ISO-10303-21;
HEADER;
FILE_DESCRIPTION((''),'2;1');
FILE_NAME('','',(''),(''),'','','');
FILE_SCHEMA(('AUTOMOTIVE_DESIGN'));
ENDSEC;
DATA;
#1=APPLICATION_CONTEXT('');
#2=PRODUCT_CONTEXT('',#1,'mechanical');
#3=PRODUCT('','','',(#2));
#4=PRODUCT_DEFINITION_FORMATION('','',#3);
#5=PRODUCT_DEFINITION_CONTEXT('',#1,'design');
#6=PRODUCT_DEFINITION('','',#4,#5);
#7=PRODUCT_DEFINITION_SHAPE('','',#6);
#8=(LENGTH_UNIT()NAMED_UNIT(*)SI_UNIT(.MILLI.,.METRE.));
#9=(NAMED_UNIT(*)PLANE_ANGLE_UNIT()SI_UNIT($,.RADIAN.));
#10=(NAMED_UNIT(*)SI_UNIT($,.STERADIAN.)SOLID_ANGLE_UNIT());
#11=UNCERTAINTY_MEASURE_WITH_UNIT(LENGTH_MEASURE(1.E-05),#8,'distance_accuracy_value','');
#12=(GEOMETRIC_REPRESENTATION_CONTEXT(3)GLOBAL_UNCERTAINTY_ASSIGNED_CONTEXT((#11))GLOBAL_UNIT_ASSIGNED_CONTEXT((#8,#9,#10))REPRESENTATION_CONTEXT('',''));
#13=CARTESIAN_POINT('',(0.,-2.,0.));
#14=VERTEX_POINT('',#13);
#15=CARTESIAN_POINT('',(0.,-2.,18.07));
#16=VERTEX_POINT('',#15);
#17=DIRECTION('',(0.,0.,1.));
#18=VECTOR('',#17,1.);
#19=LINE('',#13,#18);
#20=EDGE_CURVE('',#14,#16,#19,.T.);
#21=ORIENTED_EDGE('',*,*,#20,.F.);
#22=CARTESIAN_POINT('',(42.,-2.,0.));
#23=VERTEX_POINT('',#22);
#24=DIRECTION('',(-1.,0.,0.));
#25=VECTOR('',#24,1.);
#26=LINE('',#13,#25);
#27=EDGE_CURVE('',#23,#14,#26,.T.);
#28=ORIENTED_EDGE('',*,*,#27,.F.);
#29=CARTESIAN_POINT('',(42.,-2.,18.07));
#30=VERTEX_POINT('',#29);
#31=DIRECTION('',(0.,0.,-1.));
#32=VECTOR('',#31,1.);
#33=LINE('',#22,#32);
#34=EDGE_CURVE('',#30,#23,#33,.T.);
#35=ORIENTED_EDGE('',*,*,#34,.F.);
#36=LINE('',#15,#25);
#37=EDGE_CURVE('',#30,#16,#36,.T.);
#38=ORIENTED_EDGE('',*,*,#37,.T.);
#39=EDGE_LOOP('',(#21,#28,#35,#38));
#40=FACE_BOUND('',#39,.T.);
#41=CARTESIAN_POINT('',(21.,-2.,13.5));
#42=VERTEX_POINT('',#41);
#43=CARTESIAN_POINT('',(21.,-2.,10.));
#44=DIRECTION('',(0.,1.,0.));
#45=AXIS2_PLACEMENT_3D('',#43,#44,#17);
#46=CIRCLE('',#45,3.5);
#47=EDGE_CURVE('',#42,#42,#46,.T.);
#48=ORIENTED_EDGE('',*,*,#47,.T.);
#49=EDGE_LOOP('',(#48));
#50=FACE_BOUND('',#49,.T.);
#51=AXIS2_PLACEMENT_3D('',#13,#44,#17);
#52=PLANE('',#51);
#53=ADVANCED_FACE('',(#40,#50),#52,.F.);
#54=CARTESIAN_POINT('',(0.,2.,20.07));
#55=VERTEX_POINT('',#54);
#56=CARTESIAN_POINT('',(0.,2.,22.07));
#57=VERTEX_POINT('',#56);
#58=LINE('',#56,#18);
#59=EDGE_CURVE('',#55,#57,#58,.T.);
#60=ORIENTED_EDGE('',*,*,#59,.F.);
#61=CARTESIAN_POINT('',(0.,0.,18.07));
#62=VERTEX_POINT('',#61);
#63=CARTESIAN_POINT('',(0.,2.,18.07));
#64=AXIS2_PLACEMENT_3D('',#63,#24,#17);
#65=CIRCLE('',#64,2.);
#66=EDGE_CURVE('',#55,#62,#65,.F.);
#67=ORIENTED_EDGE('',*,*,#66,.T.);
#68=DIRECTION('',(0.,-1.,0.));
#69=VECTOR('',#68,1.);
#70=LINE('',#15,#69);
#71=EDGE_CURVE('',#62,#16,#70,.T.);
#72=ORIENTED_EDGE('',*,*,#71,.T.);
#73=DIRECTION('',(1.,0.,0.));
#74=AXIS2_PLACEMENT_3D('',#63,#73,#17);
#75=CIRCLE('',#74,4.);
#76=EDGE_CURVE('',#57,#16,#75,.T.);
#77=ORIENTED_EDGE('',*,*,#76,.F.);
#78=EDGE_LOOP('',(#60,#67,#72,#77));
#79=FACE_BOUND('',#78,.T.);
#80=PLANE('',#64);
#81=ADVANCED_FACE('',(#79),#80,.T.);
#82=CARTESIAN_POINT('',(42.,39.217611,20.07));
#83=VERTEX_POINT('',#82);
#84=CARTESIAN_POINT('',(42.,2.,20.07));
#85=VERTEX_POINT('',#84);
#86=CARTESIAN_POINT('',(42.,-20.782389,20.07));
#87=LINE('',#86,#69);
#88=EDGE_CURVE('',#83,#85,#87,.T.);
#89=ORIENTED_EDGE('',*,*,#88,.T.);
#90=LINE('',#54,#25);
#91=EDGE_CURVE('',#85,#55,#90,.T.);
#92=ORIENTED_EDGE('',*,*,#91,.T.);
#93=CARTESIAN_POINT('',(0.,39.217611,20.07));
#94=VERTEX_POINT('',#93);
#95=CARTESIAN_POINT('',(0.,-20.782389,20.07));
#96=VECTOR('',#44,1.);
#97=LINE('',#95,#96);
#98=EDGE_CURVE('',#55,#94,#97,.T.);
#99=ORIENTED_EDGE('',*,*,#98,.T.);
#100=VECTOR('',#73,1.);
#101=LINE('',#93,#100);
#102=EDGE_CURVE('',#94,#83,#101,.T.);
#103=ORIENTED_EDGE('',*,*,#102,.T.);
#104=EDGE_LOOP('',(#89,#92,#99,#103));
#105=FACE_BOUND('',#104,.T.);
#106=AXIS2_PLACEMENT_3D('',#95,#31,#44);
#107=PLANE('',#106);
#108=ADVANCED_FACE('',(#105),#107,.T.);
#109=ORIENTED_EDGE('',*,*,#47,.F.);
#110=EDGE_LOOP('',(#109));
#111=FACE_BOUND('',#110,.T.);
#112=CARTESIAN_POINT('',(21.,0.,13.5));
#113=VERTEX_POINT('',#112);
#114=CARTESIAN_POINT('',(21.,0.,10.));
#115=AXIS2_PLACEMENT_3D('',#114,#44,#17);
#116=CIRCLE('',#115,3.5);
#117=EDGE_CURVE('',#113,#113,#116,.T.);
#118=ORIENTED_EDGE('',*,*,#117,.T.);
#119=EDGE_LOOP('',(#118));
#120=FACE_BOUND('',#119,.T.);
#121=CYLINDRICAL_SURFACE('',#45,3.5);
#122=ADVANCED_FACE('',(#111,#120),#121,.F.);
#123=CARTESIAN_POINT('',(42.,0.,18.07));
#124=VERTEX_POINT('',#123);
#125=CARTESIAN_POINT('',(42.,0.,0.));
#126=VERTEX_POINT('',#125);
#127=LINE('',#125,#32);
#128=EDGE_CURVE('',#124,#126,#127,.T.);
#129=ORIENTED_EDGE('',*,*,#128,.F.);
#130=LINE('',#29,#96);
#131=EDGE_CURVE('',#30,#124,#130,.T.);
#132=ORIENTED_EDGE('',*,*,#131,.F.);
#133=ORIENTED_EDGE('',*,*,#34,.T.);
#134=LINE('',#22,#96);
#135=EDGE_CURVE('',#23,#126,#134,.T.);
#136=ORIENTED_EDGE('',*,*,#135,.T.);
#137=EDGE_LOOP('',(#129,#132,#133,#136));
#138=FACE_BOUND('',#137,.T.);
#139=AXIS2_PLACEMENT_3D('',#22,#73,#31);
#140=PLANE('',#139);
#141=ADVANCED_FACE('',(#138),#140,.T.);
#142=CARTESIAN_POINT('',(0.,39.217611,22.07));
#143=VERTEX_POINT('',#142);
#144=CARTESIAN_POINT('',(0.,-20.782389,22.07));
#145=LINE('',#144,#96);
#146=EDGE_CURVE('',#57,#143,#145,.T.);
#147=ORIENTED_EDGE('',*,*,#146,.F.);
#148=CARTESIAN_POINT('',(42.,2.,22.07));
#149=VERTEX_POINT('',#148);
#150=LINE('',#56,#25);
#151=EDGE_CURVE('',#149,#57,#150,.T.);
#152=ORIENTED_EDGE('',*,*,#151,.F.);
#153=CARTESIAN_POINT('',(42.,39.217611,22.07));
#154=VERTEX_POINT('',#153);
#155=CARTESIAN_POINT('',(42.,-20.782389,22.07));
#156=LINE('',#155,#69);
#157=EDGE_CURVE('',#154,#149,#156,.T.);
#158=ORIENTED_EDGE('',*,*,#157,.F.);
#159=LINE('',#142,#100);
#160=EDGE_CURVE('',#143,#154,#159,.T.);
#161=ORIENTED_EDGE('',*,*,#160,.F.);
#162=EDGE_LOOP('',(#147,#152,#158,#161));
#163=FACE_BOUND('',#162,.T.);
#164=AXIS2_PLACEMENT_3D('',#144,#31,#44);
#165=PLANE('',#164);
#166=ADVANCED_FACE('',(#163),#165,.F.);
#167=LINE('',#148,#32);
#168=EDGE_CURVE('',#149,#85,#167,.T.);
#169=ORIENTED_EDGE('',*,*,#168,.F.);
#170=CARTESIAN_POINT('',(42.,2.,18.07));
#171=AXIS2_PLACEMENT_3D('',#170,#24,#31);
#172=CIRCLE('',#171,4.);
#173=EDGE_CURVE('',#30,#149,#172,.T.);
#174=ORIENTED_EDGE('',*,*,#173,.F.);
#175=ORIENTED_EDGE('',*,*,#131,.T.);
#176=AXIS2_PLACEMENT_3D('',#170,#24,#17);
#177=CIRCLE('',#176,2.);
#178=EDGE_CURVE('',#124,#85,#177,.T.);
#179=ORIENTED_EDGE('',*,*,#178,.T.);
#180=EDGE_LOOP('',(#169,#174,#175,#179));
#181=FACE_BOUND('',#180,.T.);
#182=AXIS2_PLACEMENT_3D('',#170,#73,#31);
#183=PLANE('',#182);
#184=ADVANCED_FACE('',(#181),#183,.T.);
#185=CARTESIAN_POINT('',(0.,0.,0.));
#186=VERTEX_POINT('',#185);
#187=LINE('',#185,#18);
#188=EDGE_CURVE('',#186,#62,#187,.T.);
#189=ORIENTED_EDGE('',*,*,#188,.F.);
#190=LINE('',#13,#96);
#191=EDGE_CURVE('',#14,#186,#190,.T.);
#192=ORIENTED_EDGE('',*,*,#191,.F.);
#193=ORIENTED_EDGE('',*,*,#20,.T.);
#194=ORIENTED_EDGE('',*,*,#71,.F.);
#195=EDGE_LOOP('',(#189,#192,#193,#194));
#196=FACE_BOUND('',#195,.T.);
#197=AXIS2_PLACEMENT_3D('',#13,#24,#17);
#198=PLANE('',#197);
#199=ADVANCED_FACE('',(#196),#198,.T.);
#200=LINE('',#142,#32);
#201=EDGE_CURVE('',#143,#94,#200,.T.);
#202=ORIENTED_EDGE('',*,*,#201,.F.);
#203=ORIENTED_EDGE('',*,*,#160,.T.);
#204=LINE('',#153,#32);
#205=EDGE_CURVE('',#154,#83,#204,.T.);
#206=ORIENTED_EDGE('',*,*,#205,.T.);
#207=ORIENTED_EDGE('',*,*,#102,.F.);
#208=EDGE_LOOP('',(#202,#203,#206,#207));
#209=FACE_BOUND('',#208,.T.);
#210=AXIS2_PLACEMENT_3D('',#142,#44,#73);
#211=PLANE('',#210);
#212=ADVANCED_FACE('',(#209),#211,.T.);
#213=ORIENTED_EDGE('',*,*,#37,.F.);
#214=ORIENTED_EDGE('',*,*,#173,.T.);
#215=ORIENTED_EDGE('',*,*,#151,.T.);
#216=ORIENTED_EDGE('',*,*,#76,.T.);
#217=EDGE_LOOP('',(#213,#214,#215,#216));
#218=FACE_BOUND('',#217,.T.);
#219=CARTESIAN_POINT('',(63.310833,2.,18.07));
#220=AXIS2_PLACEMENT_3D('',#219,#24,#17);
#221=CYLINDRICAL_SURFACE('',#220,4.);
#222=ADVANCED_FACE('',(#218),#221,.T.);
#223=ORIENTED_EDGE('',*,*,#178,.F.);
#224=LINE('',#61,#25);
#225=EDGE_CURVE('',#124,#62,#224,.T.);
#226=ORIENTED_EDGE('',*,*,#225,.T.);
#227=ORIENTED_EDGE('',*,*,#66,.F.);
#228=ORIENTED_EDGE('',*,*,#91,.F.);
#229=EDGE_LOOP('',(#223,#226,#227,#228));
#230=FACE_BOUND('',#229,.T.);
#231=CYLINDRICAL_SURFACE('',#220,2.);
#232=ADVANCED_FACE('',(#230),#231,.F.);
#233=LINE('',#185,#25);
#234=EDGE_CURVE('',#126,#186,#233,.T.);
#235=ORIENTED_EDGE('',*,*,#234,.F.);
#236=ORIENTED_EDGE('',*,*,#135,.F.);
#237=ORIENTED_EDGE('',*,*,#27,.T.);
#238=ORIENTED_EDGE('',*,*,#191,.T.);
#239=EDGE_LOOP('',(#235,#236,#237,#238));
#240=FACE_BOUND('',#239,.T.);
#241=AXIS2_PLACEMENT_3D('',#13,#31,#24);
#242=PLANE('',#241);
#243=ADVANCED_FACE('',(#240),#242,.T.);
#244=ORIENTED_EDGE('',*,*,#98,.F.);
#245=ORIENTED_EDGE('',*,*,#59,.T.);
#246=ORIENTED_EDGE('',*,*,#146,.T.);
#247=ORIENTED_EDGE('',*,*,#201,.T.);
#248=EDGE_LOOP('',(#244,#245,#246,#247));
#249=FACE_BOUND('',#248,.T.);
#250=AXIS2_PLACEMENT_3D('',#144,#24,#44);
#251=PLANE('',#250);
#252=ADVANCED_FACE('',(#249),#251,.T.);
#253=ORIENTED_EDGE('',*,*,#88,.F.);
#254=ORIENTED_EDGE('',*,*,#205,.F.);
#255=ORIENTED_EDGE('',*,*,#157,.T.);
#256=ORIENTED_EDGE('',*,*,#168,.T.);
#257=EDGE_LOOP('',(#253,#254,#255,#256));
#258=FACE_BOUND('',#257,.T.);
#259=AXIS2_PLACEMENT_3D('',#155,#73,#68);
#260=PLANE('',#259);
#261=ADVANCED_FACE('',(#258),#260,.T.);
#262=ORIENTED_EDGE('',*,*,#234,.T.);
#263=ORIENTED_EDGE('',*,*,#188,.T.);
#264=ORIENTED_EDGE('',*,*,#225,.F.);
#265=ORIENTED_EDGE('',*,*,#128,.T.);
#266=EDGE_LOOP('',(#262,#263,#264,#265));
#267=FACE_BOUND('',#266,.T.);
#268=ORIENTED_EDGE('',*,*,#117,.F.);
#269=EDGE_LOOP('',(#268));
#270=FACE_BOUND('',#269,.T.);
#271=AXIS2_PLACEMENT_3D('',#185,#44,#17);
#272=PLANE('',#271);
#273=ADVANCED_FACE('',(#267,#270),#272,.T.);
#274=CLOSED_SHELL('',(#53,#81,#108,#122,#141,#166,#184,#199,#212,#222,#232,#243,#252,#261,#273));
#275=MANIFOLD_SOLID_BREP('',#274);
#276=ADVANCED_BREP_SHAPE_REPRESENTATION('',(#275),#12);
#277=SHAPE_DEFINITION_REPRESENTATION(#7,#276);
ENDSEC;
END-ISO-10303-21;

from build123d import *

# Parameters (mm, degrees)
SKETCH1_W              = 42
SKETCH1_H              = 60
SKETCH1_R              = 3.5
BASE_FLANGE2_DEPTH     = 2
SKETCHED_BEND1_DEPTH   = 42
SKETCHED_BEND1_2_DEPTH = 42


# Read off the part's stored shape, not the designer's step: Sketched Bend1
# Sheet-metal steps are written as plain solids
with BuildPart() as part:
    # Sketch1 → Base-Flange2 (new body)
    with BuildSketch(Plane(origin=(0, 0, 0), x_dir=(1, 0, 0), z_dir=(0, 1, 0))):
        with Locations((21, -30)):
            Rectangle(SKETCH1_W, SKETCH1_H)
        with Locations(Location((21, -10, 0), (0, 0, 270))):
            Circle(SKETCH1_R, mode=Mode.SUBTRACT)
    extrude(amount=-BASE_FLANGE2_DEPTH)

    # Sketched Bend1 outline → Sketched Bend1 (cut)
    with BuildSketch(Plane.YZ):
        with BuildLine():
            ThreePointArc((-2, 18.07), (-1.464101615, 20.07), (0, 21.534101616))
            Line((0, 21.534101616), (0, 60))
            Line((0, 60), (-2, 60))
            Line((-2, 60), (-2, 18.07))
        make_face()
    extrude(amount=SKETCHED_BEND1_DEPTH, mode=Mode.SUBTRACT)

    # Sketched Bend1 2 outline → Sketched Bend1 2 (add)
    with BuildSketch(Plane.YZ):
        with BuildLine():
            ThreePointArc((0, 18.07), (0.585786438, 19.484213562), (2, 20.07))
            Line((2, 20.07), (39.21761102, 20.07))
            Line((39.21761102, 20.07), (39.21761102, 22.07))
            Line((39.21761102, 22.07), (2, 22.07))
            ThreePointArc((2, 22.07), (0.96472382, 21.933703305), (0, 21.534101616))
            Line((0, 21.534101616), (0, 18.07))
        make_face()
    extrude(amount=SKETCHED_BEND1_2_DEPTH)


solid = part.part
